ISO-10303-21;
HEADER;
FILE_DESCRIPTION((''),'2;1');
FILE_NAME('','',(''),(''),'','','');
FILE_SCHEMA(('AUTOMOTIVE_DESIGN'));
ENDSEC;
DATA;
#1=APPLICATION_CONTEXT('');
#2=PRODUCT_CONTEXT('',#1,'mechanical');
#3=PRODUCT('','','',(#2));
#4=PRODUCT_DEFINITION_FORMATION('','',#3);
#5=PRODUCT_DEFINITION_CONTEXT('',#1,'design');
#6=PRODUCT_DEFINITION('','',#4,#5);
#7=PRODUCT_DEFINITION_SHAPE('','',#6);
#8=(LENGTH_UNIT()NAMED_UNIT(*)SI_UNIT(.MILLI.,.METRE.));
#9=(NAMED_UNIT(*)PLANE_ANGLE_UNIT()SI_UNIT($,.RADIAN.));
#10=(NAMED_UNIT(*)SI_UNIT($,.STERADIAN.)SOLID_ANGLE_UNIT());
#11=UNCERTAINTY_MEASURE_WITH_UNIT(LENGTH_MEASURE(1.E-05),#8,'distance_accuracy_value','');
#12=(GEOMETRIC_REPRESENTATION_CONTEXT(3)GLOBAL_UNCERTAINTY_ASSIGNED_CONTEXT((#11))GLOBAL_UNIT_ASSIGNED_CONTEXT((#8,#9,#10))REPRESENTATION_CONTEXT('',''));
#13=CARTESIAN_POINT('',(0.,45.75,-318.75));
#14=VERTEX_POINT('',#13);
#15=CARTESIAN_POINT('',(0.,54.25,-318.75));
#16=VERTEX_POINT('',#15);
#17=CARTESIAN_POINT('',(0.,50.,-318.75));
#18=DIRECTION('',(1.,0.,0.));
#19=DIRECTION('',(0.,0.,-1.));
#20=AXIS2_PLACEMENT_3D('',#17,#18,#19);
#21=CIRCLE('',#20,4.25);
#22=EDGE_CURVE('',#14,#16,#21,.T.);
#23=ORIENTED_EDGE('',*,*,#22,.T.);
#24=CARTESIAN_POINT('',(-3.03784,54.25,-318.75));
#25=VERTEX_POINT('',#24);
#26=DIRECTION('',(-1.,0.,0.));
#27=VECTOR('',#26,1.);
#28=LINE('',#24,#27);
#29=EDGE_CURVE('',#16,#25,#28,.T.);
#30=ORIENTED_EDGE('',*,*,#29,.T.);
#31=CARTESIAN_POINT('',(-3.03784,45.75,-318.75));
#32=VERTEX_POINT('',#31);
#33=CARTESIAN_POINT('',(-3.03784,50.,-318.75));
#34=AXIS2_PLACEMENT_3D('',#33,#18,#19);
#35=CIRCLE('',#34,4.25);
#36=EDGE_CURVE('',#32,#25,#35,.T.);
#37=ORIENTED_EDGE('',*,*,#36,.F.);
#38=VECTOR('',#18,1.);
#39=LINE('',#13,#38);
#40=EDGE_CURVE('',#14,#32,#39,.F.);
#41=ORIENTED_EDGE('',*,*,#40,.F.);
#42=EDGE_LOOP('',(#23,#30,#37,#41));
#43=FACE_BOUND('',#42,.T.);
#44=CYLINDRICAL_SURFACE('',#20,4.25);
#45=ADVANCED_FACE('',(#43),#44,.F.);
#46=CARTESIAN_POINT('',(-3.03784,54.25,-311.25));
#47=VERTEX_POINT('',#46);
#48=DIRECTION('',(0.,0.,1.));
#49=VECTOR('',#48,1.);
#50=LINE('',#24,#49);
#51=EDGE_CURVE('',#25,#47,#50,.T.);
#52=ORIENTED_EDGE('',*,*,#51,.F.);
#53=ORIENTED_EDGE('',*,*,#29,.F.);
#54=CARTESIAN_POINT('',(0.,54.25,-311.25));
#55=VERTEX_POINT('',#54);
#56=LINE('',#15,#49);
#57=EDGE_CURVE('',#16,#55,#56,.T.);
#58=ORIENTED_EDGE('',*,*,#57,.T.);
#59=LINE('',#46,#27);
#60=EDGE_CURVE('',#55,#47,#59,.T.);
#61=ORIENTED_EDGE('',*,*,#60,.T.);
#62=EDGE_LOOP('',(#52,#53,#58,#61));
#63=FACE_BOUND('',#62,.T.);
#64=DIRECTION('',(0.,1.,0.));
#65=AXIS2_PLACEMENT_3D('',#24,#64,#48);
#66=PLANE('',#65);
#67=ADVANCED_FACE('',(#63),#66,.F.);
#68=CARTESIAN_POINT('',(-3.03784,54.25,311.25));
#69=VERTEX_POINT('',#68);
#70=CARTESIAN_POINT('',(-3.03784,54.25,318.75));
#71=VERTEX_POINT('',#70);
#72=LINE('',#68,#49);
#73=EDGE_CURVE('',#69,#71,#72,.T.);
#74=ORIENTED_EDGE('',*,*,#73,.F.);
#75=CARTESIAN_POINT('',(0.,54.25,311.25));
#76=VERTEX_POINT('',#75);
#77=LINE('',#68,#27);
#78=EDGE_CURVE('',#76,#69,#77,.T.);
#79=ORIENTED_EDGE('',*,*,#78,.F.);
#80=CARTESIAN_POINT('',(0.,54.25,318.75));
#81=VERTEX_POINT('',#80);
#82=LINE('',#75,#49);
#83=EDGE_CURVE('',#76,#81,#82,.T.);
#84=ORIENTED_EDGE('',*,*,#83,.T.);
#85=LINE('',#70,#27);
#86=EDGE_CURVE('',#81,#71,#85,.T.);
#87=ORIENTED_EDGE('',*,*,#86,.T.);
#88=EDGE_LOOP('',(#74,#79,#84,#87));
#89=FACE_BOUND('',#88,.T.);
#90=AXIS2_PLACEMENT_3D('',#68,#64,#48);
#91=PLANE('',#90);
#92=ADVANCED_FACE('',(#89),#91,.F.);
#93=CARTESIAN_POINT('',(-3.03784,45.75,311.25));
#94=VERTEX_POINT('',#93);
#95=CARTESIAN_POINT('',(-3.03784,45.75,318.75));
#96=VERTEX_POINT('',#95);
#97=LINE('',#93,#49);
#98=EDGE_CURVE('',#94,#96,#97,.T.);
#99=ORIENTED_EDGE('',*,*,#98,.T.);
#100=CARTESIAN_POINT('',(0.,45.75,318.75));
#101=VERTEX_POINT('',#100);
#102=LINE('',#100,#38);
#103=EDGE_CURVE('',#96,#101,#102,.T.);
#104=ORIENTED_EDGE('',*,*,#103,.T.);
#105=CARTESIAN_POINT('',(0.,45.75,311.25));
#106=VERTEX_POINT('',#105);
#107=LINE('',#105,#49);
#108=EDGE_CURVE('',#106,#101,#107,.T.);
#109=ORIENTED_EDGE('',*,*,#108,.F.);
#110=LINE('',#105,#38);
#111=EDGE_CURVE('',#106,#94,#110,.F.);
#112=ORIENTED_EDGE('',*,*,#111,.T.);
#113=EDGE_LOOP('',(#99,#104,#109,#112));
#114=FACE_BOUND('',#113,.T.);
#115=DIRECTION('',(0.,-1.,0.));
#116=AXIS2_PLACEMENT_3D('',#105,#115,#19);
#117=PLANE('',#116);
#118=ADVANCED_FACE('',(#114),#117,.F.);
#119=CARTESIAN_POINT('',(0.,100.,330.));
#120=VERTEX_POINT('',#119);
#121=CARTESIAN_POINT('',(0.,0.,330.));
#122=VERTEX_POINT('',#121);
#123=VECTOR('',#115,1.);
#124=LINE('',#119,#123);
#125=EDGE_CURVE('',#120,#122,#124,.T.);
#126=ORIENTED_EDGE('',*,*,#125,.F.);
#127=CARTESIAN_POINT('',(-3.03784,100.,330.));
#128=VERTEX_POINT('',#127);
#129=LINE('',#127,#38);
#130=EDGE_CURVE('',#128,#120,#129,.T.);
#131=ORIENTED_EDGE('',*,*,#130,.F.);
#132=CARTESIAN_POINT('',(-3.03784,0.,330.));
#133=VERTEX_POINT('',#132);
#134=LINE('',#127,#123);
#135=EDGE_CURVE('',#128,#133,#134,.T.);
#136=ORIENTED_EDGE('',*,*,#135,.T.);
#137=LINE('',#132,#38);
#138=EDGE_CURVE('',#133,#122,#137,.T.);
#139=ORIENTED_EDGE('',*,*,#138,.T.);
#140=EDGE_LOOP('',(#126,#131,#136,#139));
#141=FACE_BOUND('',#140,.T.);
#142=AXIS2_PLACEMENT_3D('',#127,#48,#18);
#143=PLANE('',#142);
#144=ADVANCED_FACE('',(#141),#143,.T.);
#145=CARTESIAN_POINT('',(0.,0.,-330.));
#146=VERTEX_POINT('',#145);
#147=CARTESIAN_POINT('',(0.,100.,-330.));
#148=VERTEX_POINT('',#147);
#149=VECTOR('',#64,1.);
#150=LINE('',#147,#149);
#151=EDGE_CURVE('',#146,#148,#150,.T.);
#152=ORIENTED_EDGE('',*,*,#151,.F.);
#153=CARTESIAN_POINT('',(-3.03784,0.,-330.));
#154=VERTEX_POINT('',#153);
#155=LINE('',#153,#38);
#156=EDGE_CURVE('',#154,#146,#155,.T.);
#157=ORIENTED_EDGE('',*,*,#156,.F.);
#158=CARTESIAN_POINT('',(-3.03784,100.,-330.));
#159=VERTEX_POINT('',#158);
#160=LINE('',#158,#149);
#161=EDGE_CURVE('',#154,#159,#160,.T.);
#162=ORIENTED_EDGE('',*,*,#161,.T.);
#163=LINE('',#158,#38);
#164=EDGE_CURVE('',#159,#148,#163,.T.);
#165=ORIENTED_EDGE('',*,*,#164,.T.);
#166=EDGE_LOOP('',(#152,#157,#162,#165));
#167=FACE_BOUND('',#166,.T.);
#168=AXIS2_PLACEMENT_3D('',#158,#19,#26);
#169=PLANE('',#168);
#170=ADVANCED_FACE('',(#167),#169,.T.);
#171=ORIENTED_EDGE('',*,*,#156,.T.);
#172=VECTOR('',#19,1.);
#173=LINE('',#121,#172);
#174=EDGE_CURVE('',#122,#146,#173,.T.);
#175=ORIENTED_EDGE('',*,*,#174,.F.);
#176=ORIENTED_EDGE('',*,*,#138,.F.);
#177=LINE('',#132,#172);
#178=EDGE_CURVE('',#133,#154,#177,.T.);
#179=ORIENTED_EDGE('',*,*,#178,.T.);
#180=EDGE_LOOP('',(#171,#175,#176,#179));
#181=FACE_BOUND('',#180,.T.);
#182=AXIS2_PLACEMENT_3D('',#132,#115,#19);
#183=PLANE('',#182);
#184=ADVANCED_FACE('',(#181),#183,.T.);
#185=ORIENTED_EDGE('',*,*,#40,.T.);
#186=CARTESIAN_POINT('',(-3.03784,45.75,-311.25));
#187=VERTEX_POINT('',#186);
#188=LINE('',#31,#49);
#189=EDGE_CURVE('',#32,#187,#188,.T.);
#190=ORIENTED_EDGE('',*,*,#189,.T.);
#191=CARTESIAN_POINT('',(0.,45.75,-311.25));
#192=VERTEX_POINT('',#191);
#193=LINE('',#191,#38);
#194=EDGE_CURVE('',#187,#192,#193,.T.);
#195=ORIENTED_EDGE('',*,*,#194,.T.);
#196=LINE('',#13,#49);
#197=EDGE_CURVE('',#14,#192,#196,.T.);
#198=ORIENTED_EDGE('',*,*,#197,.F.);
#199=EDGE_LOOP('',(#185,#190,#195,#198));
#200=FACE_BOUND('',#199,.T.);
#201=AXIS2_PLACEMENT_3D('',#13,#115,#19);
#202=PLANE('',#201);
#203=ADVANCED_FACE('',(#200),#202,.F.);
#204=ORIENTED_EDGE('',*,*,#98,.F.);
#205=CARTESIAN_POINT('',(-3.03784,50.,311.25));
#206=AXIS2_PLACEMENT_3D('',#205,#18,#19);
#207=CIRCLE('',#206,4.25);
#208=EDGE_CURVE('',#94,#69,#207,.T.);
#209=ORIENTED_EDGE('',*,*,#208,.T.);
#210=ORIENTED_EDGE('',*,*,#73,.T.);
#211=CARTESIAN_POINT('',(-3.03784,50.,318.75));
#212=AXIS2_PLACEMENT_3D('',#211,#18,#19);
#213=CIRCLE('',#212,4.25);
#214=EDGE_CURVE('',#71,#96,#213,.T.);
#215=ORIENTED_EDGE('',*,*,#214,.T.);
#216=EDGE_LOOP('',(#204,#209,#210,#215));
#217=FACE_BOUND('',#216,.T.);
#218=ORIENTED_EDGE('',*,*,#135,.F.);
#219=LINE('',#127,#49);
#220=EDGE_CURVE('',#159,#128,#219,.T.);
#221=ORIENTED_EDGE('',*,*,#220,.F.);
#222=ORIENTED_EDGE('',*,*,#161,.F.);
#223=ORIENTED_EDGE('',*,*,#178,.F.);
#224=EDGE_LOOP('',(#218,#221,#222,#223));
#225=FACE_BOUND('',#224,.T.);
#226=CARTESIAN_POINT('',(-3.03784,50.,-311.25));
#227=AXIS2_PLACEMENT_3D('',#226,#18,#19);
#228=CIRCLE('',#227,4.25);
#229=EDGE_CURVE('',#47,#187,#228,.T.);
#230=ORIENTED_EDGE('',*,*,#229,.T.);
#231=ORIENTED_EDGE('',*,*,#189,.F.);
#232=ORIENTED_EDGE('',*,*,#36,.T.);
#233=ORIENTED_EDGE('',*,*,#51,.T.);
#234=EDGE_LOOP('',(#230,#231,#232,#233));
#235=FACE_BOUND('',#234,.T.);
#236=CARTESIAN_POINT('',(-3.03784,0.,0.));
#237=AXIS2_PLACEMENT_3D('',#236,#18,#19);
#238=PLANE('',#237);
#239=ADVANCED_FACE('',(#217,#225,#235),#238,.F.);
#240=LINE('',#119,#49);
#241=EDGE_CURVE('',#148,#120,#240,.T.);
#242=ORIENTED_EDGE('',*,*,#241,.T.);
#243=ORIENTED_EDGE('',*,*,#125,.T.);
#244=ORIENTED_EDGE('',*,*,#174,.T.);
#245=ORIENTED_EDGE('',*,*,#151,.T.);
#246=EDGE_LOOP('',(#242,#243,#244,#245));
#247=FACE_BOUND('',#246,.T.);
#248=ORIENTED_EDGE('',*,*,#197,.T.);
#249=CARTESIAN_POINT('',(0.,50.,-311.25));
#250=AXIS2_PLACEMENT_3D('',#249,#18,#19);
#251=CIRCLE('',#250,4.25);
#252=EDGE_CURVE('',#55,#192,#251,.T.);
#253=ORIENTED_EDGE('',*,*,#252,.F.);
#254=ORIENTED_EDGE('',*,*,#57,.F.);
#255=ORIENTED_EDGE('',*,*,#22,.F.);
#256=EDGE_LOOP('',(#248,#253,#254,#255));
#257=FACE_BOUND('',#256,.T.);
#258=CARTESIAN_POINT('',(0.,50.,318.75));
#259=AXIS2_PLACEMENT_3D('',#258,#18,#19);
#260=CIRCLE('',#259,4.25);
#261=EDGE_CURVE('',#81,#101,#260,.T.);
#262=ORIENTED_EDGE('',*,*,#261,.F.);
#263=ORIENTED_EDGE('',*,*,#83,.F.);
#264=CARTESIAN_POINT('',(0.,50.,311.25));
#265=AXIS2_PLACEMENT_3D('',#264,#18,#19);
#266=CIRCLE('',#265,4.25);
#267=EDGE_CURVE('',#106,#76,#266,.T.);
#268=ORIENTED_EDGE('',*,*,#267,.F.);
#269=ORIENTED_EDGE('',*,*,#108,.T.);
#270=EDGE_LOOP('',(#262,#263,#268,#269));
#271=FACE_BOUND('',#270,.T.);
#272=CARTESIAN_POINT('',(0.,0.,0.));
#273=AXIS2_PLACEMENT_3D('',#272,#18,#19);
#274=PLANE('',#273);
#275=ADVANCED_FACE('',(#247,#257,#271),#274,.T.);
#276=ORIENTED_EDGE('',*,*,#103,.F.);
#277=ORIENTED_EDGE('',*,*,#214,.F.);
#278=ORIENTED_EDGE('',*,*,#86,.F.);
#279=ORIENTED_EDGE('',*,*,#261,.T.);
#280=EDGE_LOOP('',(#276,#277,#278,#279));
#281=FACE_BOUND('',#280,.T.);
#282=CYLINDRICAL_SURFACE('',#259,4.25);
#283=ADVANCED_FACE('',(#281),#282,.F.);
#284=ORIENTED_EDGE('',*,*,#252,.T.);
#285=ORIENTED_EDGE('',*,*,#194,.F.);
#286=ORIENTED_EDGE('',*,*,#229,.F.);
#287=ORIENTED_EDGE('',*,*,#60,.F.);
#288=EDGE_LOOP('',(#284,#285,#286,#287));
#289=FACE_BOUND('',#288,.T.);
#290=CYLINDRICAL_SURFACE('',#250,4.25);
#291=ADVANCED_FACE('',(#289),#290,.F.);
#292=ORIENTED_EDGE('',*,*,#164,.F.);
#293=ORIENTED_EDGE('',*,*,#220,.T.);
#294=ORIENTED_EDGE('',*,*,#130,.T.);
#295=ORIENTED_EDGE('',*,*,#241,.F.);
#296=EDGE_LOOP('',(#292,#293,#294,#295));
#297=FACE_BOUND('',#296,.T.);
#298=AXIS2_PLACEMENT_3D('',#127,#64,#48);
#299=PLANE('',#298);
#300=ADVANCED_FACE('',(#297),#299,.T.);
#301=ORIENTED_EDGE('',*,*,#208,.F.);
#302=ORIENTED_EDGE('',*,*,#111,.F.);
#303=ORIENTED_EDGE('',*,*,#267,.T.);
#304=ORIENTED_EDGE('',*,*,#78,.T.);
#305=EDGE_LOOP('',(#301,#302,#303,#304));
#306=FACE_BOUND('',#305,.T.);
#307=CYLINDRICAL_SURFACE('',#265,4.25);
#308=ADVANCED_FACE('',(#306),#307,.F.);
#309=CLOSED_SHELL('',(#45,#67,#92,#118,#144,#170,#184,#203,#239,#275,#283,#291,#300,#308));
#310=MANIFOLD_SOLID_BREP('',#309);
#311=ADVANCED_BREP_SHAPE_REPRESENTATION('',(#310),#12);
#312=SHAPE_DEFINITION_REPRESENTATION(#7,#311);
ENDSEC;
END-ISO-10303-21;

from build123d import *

# Parameters (mm, degrees)
SKETCH1_W                = 660
SKETCH1_H                = 100
BASE_FLANGE1_DEPTH       = 3.03784
M6_START                 = -3.03784
M6_CLEARANCE_SLOT1_DEPTH = 3.03784


# Read off the part's stored shape, not the designer's step: M6 Clearance Slot1
# Sheet-metal steps are written as plain solids
with BuildPart() as part:
    # Sketch1 → Base-Flange1 (new body)
    with BuildSketch(Plane(origin=(0, 0, 0), x_dir=(0, 0, -1), z_dir=(1, 0, 0))):
        with Locations((0, 50)):
            Rectangle(SKETCH1_W, SKETCH1_H)
    extrude(amount=-BASE_FLANGE1_DEPTH)

    # M6 Clearance Slot1 outline → M6 Clearance Slot1 (cut)
    with BuildSketch(Plane.YZ.offset(M6_START)):
        with BuildLine():
            Line((54.25, -318.75), (54.25, -311.25))
            ThreePointArc((54.25, -311.25), (50, -307), (45.75, -311.25))
            Line((45.75, -311.25), (45.75, -318.75))
            ThreePointArc((45.75, -318.75), (50, -323), (54.25, -318.75))
        make_face()
        with BuildLine():
            ThreePointArc((54.25, 318.75), (50, 323), (45.75, 318.75))
            Line((45.75, 318.75), (45.75, 311.25))
            ThreePointArc((45.75, 311.25), (50, 307), (54.25, 311.25))
            Line((54.25, 311.25), (54.25, 318.75))
        make_face()
    extrude(amount=M6_CLEARANCE_SLOT1_DEPTH, mode=Mode.SUBTRACT)


solid = part.part
